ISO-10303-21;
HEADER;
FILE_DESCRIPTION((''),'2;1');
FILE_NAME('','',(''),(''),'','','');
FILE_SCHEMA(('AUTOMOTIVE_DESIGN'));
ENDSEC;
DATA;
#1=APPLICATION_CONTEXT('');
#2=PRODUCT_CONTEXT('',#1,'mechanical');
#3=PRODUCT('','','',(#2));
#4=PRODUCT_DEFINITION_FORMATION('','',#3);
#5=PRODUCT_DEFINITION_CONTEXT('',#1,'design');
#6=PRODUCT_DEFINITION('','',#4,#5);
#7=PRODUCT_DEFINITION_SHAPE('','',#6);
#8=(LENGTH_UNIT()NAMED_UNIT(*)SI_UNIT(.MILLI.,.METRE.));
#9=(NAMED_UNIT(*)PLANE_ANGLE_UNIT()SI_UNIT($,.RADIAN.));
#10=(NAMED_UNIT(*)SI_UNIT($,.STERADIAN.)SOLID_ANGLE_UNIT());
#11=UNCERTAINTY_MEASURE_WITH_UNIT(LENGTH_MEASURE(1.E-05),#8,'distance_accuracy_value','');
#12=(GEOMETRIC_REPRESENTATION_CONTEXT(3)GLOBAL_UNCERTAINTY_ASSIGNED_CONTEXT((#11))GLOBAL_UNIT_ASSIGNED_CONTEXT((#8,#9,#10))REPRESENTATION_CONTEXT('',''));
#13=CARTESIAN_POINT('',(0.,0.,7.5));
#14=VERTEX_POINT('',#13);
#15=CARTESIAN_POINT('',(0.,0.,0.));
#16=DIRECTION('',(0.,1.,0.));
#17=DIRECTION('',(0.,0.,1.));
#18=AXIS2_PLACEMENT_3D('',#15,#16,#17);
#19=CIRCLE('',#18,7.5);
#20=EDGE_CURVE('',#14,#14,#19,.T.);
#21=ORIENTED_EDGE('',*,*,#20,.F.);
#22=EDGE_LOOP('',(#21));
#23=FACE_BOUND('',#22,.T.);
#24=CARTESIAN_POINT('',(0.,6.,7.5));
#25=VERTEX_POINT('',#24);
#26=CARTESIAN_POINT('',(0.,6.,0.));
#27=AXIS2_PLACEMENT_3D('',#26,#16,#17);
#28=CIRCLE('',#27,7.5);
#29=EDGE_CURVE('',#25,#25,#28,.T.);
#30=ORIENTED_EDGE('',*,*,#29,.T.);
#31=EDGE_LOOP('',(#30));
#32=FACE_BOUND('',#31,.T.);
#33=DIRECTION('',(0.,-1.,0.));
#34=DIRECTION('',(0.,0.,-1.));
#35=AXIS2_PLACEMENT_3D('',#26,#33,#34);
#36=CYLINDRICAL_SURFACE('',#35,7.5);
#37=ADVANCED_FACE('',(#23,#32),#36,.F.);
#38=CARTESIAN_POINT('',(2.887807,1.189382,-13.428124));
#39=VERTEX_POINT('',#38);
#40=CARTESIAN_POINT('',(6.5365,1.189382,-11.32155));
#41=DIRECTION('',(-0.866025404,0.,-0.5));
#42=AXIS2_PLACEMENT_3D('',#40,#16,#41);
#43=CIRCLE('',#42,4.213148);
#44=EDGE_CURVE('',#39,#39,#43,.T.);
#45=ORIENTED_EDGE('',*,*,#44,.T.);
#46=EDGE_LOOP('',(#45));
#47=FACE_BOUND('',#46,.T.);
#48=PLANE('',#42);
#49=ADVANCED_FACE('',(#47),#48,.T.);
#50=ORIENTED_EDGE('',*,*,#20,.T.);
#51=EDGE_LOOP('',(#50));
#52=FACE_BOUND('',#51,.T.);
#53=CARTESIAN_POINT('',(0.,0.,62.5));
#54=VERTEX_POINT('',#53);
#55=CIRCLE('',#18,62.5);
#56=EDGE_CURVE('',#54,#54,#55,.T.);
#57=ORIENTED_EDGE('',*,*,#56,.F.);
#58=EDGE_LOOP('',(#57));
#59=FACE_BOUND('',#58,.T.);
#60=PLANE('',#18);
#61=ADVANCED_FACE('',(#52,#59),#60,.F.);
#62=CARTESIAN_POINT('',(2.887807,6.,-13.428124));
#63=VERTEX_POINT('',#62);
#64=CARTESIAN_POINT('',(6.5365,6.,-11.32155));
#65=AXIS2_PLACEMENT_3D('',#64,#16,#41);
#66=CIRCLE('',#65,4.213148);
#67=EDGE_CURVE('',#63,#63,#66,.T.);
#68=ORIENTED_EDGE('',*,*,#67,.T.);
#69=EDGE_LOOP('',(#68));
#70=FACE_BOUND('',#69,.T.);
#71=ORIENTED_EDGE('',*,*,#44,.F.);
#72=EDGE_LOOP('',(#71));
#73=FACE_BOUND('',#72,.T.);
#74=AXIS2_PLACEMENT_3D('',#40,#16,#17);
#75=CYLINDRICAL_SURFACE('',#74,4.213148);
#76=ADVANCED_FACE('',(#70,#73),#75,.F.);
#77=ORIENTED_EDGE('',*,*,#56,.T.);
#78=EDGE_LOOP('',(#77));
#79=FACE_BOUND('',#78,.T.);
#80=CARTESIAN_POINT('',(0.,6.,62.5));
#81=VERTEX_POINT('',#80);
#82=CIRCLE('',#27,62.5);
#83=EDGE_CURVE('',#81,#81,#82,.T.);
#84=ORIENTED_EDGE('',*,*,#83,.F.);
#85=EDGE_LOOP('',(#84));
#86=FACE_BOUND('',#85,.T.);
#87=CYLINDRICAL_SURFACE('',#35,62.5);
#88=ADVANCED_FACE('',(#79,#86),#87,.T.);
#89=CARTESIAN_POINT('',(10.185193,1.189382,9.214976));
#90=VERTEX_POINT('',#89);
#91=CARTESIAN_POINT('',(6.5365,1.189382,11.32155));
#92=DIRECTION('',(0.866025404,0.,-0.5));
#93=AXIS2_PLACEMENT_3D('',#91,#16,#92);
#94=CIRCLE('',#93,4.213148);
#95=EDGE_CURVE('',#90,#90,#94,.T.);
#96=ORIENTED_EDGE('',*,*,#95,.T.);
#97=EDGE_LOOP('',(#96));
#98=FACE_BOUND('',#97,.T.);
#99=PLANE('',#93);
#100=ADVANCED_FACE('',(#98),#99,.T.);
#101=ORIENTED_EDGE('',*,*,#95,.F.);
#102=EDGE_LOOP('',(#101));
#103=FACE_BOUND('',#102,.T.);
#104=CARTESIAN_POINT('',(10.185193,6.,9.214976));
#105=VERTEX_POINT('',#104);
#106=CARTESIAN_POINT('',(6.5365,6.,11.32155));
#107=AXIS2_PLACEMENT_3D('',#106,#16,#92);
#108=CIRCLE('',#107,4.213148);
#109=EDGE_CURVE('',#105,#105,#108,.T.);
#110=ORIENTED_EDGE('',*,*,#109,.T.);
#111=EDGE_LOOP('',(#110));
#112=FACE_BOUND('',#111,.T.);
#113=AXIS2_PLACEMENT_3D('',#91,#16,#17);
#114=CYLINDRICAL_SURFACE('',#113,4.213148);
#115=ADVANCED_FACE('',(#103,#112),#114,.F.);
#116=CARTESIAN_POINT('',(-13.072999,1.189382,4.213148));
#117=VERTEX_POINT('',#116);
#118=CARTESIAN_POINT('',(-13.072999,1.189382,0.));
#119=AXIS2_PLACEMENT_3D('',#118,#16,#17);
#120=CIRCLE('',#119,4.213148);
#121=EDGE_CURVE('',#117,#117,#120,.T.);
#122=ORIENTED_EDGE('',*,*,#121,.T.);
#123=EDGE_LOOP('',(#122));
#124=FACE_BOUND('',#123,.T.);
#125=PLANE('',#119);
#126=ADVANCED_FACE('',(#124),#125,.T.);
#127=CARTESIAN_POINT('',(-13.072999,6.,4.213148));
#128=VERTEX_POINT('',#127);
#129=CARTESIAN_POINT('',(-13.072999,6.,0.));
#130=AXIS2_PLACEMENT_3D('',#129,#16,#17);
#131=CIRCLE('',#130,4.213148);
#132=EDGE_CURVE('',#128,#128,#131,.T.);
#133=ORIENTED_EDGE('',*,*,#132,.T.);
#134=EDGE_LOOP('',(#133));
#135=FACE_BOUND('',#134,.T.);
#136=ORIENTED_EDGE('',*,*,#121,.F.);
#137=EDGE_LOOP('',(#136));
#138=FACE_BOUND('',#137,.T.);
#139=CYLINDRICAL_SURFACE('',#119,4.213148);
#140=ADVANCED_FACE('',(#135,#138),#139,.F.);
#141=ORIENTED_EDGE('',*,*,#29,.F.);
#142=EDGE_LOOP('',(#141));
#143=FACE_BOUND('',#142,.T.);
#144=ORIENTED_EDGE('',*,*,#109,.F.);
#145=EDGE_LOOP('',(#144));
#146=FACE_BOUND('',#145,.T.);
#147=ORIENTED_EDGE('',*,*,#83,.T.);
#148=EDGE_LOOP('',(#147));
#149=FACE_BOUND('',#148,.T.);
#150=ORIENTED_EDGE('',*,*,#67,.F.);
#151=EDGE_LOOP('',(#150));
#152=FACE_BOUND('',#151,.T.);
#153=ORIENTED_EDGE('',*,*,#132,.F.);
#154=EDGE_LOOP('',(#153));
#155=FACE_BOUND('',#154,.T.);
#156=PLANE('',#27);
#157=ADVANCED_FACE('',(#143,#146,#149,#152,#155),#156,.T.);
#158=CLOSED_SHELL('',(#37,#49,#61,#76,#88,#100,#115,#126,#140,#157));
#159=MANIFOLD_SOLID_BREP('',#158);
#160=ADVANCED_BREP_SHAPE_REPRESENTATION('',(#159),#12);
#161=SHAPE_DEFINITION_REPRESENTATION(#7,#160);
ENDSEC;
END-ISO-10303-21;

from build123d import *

# Parameters (mm, degrees)
SKETCH1_R           = 62.5
BOSS_EXTRUDE1_DEPTH = 6
SKETCH2_R           = 7.5
CUT_EXTRUDE1_DEPTH  = 89.591760339
SKETCH3_R           = 4.213148027
CUT_EXTRUDE2_DEPTH  = 4.810618204
CIRPATTERN1_COUNT   = 3


with BuildPart() as part:
    # Sketch1 → Boss-Extrude1 (new body)
    with BuildSketch(Plane(origin=(0, 0, 0), x_dir=(1, 0, 0), z_dir=(0, 1, 0))):
        Circle(SKETCH1_R)
    extrude(amount=BOSS_EXTRUDE1_DEPTH)

    # Sketch2 → Cut-Extrude1 (cut, through all)
    with BuildSketch(Plane(origin=(0, 0, 0), x_dir=(1, 0, 0), z_dir=(0, 1, 0))):
        Circle(SKETCH2_R)
    extrude(amount=CUT_EXTRUDE1_DEPTH, mode=Mode.SUBTRACT)

    # Sketch3 → Cut-Extrude2 (cut)
    with BuildSketch(Plane(origin=(0, 6, 0), x_dir=(1, 0, 0), z_dir=(0, 1, 0))):
        with Locations((-13.072999483, 0)):
            Circle(SKETCH3_R)
    cut_extrude2 = extrude(amount=-CUT_EXTRUDE2_DEPTH, mode=Mode.SUBTRACT)

    # CirPattern1: Cut-Extrude2 ×3 about axis
    cirpattern1_axis = Axis((0, 0, 0), (0, 1, 0))
    for i in range(1, CIRPATTERN1_COUNT):
        add(cut_extrude2.rotate(cirpattern1_axis, i * 360 / CIRPATTERN1_COUNT), mode=Mode.SUBTRACT)


solid = part.part
